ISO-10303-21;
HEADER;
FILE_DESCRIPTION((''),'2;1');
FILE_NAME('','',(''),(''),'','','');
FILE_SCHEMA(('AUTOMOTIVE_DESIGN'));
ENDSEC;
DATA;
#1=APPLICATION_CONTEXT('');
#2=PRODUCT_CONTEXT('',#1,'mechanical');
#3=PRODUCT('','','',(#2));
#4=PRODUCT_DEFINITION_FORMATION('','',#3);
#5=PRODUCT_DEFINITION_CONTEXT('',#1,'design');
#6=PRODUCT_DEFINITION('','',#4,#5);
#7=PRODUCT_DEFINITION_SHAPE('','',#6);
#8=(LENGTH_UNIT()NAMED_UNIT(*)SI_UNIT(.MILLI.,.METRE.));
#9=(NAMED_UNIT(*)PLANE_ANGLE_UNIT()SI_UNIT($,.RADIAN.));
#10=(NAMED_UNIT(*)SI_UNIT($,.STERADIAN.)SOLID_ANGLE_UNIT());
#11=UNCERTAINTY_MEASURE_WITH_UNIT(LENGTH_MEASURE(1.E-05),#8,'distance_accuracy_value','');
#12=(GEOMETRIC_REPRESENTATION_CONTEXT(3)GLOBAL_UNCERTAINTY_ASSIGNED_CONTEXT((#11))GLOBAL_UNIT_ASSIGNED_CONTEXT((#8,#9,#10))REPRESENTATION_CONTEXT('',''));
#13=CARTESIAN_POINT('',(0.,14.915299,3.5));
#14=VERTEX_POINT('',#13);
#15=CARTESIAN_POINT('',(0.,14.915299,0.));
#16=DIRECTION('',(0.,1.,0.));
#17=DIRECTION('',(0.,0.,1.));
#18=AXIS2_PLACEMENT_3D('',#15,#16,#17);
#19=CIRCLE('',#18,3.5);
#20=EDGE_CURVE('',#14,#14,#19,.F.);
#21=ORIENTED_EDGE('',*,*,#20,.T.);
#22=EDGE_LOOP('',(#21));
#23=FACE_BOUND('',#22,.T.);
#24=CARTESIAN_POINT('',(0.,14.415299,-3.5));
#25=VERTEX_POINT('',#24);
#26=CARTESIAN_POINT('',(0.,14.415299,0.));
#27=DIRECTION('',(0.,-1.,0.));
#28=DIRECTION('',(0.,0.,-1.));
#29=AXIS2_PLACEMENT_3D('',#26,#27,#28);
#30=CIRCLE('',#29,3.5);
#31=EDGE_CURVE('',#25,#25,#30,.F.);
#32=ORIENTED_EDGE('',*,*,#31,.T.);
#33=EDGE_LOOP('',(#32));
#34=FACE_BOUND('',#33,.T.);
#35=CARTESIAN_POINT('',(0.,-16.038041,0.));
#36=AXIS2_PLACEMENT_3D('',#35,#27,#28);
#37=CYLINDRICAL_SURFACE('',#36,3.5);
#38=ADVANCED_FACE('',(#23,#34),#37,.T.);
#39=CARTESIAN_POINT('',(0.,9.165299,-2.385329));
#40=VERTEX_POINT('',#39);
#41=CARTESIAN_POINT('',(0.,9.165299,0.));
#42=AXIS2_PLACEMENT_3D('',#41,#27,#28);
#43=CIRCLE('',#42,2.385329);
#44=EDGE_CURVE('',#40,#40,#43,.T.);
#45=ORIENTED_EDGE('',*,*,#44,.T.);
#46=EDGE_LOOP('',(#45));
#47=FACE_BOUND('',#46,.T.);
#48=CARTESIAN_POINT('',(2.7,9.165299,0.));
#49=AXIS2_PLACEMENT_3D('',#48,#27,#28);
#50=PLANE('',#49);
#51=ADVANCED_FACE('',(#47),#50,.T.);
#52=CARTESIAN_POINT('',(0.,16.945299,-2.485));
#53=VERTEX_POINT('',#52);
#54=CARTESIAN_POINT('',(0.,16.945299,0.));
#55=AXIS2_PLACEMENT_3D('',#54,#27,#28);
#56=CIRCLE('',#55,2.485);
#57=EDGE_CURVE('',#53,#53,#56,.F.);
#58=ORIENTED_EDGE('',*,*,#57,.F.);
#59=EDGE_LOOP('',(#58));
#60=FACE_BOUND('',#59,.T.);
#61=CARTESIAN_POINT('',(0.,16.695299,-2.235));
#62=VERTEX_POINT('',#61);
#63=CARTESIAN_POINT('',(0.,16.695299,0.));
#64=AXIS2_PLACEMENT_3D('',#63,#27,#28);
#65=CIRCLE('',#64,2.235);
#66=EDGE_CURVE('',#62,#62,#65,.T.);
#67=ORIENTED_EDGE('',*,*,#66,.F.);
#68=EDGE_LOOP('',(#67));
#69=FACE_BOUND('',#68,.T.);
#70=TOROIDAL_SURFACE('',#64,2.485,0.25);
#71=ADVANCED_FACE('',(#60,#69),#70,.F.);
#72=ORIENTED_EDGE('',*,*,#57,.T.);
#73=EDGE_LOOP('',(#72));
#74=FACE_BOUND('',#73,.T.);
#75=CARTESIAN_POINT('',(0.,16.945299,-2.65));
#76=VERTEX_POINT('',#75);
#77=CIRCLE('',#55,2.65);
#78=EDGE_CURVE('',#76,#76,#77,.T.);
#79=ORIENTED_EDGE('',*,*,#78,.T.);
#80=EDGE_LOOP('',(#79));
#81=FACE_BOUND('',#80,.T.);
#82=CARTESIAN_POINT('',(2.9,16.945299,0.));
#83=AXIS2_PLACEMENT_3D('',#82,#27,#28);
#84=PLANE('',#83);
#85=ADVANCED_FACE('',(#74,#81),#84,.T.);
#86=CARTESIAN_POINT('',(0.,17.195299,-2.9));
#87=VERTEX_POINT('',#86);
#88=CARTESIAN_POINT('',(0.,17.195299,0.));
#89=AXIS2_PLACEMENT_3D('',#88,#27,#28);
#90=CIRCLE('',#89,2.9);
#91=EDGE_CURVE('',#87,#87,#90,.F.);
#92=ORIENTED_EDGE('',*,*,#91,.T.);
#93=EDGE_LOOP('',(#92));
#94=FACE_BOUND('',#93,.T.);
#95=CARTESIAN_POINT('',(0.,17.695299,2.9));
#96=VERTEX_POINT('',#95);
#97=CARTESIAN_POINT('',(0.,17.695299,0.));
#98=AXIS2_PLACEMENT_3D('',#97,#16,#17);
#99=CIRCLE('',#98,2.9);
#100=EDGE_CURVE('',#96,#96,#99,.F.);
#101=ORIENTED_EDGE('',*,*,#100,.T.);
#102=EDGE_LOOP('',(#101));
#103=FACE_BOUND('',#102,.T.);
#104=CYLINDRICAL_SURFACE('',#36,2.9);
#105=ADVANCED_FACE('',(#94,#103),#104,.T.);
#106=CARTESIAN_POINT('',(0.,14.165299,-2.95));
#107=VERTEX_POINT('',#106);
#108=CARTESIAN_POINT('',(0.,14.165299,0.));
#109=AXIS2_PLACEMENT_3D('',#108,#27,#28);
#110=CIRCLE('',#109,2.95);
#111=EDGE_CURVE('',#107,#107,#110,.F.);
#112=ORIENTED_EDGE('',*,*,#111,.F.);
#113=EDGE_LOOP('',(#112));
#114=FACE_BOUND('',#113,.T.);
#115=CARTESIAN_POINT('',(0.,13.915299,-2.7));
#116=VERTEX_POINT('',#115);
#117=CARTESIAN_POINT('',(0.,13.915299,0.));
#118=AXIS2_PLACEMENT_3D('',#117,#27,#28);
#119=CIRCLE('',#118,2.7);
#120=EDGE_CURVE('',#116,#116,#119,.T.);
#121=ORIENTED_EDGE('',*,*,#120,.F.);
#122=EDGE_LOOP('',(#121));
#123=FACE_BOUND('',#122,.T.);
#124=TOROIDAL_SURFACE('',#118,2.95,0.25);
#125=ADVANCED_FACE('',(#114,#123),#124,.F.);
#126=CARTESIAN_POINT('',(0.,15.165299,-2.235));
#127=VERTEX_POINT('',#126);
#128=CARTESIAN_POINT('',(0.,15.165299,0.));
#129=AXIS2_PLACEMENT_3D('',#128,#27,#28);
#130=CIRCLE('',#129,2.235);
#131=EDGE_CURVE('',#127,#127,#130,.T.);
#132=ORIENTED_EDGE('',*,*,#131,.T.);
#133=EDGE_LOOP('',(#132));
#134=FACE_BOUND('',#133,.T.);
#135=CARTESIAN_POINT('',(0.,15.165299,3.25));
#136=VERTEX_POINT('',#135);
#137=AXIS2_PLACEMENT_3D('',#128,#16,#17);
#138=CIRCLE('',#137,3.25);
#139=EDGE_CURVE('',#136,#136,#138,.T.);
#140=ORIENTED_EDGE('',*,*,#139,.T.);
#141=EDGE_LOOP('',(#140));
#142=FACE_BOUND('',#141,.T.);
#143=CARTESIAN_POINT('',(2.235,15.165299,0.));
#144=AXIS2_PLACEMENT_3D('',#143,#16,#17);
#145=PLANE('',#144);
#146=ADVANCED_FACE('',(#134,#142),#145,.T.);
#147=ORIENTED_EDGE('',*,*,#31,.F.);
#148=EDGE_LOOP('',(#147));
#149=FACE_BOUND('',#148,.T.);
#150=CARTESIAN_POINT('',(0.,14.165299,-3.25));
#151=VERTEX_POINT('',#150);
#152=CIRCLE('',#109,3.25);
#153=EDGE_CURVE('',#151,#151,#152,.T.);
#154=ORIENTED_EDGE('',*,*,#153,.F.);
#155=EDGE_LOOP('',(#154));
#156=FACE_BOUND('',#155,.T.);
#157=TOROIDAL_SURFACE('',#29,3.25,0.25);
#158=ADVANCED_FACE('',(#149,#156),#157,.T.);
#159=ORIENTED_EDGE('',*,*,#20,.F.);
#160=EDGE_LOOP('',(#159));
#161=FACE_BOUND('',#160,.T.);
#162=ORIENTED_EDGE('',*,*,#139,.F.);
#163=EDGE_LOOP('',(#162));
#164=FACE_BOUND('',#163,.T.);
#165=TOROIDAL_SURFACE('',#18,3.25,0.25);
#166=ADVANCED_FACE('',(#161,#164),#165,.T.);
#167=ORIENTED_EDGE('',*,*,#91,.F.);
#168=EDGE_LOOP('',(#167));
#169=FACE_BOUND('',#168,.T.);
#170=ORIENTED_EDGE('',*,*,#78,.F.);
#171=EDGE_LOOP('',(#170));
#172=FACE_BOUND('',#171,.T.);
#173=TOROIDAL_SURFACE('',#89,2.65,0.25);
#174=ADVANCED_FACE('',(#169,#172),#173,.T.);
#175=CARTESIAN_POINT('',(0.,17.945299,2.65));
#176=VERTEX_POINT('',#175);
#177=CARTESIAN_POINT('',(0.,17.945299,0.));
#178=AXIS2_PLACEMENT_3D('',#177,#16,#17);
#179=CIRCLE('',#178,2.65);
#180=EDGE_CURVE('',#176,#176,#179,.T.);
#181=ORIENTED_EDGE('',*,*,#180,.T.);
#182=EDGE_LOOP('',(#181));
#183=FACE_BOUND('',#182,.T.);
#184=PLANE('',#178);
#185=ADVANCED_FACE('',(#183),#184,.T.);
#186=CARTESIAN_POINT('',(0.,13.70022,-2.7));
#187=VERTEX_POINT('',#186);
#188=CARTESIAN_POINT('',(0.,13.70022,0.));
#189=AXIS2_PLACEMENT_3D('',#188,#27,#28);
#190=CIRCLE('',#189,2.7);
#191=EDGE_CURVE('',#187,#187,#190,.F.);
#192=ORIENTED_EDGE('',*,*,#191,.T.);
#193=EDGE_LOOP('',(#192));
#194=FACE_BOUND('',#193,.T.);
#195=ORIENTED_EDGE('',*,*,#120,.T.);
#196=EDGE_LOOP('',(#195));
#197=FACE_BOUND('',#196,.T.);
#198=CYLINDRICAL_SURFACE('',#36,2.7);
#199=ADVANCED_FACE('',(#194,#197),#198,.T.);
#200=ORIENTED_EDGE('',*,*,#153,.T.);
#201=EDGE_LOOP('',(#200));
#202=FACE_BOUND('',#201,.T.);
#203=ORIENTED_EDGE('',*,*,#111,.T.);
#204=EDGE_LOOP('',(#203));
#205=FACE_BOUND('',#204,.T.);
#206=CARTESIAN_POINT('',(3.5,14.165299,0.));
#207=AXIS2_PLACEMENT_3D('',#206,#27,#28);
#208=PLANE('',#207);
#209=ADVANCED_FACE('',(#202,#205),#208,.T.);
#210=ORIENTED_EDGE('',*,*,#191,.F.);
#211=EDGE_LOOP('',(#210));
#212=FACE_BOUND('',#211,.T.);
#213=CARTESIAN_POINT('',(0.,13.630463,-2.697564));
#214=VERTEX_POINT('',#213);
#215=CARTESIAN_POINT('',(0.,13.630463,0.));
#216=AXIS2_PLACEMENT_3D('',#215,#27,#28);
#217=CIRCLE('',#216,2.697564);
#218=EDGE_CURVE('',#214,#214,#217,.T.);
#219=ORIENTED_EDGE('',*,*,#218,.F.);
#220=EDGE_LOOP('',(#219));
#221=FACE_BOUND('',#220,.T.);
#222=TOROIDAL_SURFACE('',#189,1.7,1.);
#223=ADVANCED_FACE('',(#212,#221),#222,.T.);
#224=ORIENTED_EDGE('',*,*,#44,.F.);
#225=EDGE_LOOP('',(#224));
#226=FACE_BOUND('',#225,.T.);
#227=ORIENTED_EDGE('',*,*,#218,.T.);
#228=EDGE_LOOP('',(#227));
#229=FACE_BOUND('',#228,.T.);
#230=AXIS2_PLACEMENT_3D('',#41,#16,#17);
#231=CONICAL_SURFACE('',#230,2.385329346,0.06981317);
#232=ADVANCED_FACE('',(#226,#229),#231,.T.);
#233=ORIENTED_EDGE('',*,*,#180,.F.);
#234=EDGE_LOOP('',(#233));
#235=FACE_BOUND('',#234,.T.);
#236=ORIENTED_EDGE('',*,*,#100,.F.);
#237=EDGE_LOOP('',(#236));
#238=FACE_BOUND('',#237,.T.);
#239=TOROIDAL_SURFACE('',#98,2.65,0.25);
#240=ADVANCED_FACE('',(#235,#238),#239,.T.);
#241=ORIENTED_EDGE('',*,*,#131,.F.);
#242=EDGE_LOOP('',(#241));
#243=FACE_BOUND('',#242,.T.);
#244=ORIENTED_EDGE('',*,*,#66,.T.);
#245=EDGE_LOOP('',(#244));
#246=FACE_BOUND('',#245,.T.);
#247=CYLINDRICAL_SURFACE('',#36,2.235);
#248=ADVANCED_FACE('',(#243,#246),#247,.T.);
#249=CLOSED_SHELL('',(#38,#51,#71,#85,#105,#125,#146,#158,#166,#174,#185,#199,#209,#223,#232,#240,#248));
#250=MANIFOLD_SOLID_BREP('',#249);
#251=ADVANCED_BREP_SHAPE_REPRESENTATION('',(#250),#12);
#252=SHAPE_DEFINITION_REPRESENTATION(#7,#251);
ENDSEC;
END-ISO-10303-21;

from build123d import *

# Parameters (mm, degrees)
FILLET2_R      = 0.25
FILLET3_R      = 0.25
FILLET4_R      = 0.25
CHAMFER1_SIZE  = 4.5
CHAMFER1_SIZE2 = 0.3146706537458017
FILLET6_R      = 1
FILLET8_R      = 0.25


with BuildPart() as part:
    # Sketch1 → Revolve1 (revolve)
    with BuildSketch(Plane.XY, mode=Mode.PRIVATE) as revolve1_sk:
        Polygon((0, 17.945298939448026), (2.9, 17.945298939448026), (2.9, 16.945298939448023), (2.235, 16.945298939448023), (2.2350000000000003, 15.165298939448023), (3.5, 15.165298939448023), (3.5000000000000004, 14.165298939448023), (2.7, 14.165298939448023), (2.7000000000000006, 9.165298939448022), (0, 9.165298939448022), align=None)
    revolve(revolve1_sk.sketch.rotate(Axis((0, -16.038041176324008, 0), (0, 1, 0)), 90), axis=Axis((0, -16.038041176324008, 0), (0, 1, 0)))

    # Fillet2
    fillet2_edges = [part.edges().sort_by_distance(p)[0] for p in [
        (-8.2e-16, 14.165298939448022, 3.5000000000000004),
        (-8.2e-16, 15.165298939448022, 3.5),
    ]]
    fillet(fillet2_edges, radius=FILLET2_R)

    # Fillet3
    fillet3_edges = [part.edges().sort_by_distance(p)[0] for p in [
        (-6.8e-16, 16.945298939448023, 2.9),
        (-6.8e-16, 17.94529893944803, 2.9),
    ]]
    fillet(fillet3_edges, radius=FILLET3_R)

    # Fillet4
    fillet4_edges = [part.edges().sort_by_distance(p)[0] for p in [
        (-6.3e-16, 14.165298939448022, 2.7),
    ]]
    fillet(fillet4_edges, radius=FILLET4_R)

    # Chamfer1
    chamfer1_edges = [part.edges().sort_by_distance(p)[0] for p in [
        (-6.3e-16, 9.165298939448022, 2.7000000000000006),
    ]]
    chamfer1_side = [part.faces().sort_by_distance(p)[0] for p in [
        (-6.3e-16, 11.540298939448022, 2.7),
    ]]
    chamfer(chamfer1_edges, length=CHAMFER1_SIZE, length2=CHAMFER1_SIZE2, reference=chamfer1_side[0])

    # Fillet6
    # the kernel refuses this fillet: 1 mm, written as the material it takes off along each edge
    with BuildSketch(Plane(origin=(0, 13.665298939448022, 0), x_dir=(1.1e-16, 0, -1), z_dir=(1, 0, 1.1e-16))) as fillet6_piece_1:
        with BuildLine():
            CenterArc((2.7 - FILLET6_R, FILLET6_R * 0.0349207694917), FILLET6_R, 355.99999999999994, 4.000000000000057)
            Line((2.7 - FILLET6_R * 0.00243594974018, -FILLET6_R * 0.0348357042524), (2.7, 0))
            Line((2.7, 0), (2.7, FILLET6_R * 0.0349207694917))
        make_face()
    revolve(axis=Axis((0, 13.665298939448022, 0), (0, 1, 0)), mode=Mode.SUBTRACT)

    # Fillet8
    fillet8_edges = [part.edges().sort_by_distance(p)[0] for p in [
        (-5.2e-16, 16.945298939448023, 2.235),
    ]]
    fillet(fillet8_edges, radius=FILLET8_R)


solid = part.part
